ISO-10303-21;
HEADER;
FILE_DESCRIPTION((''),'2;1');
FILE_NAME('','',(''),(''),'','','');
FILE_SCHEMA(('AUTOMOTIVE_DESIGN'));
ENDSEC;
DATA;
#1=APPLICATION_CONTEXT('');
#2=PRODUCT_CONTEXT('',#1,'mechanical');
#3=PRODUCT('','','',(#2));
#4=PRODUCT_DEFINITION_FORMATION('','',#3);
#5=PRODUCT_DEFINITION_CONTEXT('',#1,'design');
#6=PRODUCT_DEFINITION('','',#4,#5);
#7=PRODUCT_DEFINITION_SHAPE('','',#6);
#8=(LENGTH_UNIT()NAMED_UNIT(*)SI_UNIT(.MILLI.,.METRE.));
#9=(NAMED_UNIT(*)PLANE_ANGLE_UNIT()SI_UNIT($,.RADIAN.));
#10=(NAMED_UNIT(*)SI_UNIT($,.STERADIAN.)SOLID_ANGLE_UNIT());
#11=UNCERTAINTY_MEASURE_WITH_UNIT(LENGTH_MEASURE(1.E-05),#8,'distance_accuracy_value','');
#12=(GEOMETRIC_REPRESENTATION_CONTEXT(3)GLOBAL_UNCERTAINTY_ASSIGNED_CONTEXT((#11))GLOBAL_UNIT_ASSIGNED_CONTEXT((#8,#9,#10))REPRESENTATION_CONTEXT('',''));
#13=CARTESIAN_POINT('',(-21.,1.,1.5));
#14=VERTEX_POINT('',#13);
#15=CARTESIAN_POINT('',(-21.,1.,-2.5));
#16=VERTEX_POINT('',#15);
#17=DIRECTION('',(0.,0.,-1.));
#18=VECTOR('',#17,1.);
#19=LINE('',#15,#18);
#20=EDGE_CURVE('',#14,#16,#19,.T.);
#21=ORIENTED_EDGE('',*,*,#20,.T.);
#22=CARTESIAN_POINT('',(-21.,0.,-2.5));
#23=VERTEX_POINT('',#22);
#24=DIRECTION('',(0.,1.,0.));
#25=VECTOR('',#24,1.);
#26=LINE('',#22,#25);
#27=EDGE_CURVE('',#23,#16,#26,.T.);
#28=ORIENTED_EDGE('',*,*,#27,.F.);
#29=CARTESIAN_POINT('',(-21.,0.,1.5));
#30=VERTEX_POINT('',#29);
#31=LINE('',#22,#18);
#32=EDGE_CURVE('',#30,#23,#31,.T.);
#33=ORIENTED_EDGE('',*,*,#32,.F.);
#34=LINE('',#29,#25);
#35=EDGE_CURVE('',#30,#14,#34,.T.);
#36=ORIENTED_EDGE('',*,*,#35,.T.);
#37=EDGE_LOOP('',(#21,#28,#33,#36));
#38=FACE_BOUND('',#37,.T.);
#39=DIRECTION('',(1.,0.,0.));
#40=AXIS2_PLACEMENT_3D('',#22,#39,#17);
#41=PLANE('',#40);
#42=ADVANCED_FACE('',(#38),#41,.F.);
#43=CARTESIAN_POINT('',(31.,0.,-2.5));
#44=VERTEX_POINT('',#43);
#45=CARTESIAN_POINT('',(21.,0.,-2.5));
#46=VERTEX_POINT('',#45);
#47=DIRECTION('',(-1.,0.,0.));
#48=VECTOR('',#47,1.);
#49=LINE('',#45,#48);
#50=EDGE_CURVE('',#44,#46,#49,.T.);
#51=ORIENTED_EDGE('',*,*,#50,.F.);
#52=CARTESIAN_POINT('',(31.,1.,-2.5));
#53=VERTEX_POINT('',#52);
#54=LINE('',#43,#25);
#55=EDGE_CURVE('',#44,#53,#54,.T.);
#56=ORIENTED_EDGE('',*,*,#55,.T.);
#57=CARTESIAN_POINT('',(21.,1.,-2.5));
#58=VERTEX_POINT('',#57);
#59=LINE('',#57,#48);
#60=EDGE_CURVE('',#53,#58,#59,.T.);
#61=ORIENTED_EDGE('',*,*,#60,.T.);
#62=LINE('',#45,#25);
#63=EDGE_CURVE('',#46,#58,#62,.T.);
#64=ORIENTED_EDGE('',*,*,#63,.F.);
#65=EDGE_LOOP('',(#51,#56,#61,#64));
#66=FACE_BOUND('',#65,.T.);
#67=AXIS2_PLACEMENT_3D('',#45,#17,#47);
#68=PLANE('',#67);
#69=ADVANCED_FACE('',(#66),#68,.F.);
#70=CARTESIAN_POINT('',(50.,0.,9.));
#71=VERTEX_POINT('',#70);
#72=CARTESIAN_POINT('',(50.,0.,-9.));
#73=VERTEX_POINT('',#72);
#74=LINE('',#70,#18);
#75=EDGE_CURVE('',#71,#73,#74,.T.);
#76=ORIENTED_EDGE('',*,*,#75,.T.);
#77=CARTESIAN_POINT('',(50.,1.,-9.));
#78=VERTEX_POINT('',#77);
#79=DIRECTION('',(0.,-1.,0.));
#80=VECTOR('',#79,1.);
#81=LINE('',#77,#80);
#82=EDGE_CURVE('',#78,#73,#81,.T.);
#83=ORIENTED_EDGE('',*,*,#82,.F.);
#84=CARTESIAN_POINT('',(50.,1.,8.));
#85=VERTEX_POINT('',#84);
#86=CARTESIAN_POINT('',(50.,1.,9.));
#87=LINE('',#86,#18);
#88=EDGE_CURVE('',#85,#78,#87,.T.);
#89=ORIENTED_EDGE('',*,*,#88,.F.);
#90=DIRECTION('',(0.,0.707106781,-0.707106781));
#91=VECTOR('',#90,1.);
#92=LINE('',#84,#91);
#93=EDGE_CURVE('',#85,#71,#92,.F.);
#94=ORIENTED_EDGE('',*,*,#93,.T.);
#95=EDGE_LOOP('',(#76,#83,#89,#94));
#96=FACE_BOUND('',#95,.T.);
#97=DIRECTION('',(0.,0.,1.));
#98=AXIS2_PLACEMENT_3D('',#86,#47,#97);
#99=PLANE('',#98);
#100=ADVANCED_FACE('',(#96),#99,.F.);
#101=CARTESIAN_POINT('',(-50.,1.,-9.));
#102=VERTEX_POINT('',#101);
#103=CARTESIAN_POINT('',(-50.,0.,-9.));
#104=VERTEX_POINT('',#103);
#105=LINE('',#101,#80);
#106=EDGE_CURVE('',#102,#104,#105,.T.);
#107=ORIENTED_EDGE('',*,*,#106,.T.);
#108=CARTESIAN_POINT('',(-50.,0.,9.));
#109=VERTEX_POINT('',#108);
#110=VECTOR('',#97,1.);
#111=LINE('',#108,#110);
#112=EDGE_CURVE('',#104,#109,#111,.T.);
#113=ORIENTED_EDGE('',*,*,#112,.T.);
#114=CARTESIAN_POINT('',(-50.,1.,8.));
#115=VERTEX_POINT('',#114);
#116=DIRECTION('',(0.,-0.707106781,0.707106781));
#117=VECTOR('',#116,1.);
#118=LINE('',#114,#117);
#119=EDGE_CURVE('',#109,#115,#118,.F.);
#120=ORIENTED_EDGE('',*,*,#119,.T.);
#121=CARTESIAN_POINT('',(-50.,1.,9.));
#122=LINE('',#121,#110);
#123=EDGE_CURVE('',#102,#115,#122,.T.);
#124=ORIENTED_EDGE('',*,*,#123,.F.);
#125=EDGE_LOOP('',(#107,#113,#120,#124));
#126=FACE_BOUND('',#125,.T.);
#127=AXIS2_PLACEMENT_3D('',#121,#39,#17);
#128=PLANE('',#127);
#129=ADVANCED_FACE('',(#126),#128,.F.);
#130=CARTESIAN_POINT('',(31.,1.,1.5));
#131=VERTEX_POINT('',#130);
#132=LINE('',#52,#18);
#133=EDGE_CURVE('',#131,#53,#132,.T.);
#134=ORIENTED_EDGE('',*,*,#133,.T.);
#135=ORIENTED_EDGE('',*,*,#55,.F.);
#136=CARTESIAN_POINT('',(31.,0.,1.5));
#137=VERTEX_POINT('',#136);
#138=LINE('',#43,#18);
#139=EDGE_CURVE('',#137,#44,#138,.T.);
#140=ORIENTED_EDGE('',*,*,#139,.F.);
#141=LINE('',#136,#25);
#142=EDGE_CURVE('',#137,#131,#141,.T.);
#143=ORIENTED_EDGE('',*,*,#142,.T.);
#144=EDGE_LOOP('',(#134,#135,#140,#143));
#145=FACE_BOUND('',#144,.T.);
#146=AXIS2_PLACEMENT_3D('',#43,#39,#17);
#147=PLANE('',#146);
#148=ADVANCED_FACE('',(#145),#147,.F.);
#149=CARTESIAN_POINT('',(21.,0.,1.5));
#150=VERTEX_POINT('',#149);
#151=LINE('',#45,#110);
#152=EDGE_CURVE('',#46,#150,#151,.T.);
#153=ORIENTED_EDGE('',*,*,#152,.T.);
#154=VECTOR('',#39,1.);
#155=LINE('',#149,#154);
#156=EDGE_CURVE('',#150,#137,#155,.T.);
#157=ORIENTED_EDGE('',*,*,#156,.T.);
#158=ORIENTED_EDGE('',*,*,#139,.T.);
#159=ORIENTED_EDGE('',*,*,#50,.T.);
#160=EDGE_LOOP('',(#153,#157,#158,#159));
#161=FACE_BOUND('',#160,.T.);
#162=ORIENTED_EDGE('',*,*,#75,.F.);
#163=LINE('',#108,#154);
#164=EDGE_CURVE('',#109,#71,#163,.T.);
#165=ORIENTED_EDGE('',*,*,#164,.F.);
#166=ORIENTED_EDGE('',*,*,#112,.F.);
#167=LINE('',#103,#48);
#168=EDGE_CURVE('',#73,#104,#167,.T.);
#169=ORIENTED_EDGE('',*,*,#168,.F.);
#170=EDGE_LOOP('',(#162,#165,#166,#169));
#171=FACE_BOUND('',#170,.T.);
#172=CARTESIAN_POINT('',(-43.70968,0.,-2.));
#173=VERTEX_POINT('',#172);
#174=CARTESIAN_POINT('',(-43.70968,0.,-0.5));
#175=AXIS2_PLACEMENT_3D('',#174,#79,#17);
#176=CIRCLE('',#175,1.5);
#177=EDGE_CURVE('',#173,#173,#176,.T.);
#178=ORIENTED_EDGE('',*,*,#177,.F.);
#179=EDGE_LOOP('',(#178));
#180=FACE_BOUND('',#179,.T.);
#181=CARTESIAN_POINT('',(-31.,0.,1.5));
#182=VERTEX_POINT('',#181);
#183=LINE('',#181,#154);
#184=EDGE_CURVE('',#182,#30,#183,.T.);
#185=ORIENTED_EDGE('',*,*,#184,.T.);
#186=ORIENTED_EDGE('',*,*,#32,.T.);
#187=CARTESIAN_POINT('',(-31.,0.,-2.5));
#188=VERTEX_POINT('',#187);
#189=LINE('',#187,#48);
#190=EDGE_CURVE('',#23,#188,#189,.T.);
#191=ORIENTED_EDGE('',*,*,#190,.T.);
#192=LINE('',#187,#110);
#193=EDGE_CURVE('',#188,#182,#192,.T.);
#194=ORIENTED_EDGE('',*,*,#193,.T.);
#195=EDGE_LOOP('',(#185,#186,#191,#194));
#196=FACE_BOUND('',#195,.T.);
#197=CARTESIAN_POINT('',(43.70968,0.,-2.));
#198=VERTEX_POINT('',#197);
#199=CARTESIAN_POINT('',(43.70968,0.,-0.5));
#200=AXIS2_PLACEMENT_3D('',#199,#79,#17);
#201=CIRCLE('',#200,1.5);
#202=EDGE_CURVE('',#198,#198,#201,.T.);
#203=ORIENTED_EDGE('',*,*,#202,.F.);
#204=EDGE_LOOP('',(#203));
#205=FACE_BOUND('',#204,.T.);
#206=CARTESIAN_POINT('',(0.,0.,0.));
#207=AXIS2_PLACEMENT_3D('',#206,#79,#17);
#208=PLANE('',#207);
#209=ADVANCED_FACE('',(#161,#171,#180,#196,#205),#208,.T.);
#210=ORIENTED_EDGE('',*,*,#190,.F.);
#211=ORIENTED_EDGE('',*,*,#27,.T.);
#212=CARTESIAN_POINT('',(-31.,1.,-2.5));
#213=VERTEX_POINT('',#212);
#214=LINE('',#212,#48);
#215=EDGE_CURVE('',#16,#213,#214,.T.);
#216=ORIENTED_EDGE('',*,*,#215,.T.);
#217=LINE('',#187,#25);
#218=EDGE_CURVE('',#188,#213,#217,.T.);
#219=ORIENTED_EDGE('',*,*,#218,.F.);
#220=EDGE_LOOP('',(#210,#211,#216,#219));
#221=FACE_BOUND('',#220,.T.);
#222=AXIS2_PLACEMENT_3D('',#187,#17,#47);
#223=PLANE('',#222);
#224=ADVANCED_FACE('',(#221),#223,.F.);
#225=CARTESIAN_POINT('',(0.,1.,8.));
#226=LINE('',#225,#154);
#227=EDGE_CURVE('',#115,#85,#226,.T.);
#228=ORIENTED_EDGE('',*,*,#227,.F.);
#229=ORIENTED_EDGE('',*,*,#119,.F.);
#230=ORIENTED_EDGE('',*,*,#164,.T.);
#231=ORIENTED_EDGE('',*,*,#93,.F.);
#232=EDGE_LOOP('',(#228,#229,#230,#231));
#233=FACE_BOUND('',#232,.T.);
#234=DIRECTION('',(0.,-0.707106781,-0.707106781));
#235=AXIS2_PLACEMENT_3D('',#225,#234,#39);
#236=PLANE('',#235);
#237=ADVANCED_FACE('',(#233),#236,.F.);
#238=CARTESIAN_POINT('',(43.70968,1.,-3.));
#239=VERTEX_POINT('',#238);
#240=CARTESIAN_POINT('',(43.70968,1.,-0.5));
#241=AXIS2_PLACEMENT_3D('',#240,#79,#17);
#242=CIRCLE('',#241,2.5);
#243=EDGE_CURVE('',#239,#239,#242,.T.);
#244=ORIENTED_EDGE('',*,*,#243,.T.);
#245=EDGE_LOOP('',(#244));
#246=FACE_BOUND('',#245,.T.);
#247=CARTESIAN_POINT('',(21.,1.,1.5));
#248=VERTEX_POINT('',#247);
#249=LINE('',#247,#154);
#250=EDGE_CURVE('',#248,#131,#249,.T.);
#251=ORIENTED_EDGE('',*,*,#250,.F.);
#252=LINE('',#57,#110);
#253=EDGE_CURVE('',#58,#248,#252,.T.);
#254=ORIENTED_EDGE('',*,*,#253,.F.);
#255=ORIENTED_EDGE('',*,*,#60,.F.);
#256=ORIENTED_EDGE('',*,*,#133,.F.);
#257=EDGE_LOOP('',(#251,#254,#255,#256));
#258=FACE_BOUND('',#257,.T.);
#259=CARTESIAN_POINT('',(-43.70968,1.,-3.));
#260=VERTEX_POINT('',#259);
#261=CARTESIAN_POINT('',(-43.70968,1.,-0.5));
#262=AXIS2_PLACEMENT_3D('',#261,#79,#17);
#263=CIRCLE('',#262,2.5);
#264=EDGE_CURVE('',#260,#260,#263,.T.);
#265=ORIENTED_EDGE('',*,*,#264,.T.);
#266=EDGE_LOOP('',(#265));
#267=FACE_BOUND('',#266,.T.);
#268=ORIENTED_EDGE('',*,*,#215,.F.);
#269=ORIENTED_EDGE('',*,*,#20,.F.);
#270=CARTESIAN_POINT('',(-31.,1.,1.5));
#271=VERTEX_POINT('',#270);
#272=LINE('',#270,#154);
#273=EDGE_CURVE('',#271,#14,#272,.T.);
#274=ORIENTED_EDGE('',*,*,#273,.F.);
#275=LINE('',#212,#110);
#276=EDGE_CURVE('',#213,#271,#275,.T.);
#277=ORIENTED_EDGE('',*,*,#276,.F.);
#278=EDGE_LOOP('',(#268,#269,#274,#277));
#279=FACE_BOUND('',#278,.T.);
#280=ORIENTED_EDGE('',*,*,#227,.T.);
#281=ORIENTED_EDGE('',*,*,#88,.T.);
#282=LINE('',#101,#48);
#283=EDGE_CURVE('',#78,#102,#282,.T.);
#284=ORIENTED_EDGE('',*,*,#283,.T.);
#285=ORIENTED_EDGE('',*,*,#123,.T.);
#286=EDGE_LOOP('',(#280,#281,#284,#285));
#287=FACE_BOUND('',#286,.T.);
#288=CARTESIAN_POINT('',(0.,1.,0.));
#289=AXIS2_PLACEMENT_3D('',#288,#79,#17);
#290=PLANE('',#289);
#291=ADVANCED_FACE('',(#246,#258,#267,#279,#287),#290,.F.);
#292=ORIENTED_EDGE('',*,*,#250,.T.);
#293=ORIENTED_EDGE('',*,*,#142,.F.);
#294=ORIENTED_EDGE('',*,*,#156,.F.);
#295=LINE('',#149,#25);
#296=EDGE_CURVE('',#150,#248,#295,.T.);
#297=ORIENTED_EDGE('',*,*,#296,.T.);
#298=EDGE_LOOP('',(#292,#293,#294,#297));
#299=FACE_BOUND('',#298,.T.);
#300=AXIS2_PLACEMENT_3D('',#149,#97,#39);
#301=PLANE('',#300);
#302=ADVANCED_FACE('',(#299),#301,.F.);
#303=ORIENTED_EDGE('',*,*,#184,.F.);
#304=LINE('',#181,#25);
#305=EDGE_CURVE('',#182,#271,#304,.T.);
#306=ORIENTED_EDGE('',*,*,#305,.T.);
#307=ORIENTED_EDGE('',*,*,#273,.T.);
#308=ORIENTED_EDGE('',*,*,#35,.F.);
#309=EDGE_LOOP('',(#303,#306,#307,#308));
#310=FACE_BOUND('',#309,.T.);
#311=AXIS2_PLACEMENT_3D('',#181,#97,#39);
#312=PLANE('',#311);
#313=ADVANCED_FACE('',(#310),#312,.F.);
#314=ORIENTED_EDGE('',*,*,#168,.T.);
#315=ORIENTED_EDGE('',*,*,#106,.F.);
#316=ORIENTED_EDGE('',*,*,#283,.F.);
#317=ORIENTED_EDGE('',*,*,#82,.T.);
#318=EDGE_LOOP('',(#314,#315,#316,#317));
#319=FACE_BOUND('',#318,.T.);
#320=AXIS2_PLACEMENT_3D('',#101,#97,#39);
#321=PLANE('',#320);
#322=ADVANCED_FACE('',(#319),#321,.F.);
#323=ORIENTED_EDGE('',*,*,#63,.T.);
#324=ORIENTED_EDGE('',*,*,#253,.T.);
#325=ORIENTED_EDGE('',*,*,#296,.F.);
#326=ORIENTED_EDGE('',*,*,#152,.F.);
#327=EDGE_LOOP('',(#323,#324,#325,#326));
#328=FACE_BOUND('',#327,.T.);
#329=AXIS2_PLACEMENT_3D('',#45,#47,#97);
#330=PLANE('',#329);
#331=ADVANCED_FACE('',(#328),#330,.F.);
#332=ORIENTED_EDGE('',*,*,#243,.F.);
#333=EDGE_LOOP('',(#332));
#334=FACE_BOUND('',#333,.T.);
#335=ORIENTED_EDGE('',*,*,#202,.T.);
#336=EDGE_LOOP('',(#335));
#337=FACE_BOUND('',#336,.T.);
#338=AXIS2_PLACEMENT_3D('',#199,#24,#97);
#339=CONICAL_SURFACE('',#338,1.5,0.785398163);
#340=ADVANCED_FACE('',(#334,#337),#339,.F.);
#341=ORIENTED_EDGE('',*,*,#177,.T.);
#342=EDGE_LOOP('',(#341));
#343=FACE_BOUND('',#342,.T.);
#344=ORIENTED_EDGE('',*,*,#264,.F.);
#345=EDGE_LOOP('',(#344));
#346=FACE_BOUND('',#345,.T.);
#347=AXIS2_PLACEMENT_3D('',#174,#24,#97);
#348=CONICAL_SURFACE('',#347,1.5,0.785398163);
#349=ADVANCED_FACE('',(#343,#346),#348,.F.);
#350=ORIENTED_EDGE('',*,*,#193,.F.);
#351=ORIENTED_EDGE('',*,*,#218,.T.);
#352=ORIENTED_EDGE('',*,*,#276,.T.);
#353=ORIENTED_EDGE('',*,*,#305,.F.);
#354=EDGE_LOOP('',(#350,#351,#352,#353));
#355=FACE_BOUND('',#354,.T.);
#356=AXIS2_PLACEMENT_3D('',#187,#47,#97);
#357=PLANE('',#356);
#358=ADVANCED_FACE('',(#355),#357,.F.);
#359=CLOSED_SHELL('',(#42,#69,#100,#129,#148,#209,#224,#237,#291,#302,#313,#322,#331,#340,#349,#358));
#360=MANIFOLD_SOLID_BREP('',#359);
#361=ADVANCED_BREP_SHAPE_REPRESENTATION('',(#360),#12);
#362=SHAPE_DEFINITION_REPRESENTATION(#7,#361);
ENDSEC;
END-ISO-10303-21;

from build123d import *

# Parameters (mm, degrees)
SKETCH_1_W          = 100
SKETCH_1_H          = 18
EXTRUDE_1_DEPTH     = 1
CHAMFER_1_SIZE      = 1
SKETCH_2_W          = 10
SKETCH_2_H          = 4
CUT_EXTRUDE_1_DEPTH = 1
SKETCH_3_R          = 1.5
CUT_EXTRUDE_2_DEPTH = 20
CHAMFER_2_SIZE      = 1


with BuildPart() as part:
    # Эскиз1 → Бобышка-Вытянуть1 (new body)
    with BuildSketch(Plane(origin=(0, 0, 0), x_dir=(1, 0, 0), z_dir=(0, 1, 0))):
        Rectangle(SKETCH_1_W, SKETCH_1_H)
    extrude(amount=EXTRUDE_1_DEPTH)

    # Фаска1
    chamfer_1_edges = [part.edges().sort_by_distance(p)[0] for p in [
        (0, 1, 9),
    ]]
    chamfer(chamfer_1_edges, length=CHAMFER_1_SIZE - 0.0001)  # a hair under: the kernel refuses the full size

    # Эскиз2 → Вырез-Вытянуть1 (cut)
    with BuildSketch(Plane(origin=(0, 1, 0), x_dir=(1, 0, 0), z_dir=(0, 1, 0))):
        with Locations((-26, 0.5)):
            Rectangle(SKETCH_2_W, SKETCH_2_H)
        with Locations((26, 0.5)):
            Rectangle(SKETCH_2_W, SKETCH_2_H)
    extrude(amount=-CUT_EXTRUDE_1_DEPTH, mode=Mode.SUBTRACT)

    # Эскиз3 → Вырез-Вытянуть2 (cut)
    with BuildSketch(Plane(origin=(0, 1, 0), x_dir=(1, 0, 0), z_dir=(0, 1, 0))):
        with Locations(Location((-43.709679881, 0.5, 0), (0, 0, 270))):
            Circle(SKETCH_3_R)
        with Locations(Location((43.709679881, 0.5, 0), (0, 0, 90))):
            Circle(SKETCH_3_R)
    extrude(amount=-CUT_EXTRUDE_2_DEPTH, mode=Mode.SUBTRACT)

    # Фаска2
    chamfer_2_edges = [part.edges().sort_by_distance(p)[0] for p in [
        (-43.709679881, 1, -2),
        (43.709679881, 1, 1),
    ]]
    chamfer(chamfer_2_edges, length=CHAMFER_2_SIZE - 0.0001)  # a hair under: the kernel refuses the full size


solid = part.part
